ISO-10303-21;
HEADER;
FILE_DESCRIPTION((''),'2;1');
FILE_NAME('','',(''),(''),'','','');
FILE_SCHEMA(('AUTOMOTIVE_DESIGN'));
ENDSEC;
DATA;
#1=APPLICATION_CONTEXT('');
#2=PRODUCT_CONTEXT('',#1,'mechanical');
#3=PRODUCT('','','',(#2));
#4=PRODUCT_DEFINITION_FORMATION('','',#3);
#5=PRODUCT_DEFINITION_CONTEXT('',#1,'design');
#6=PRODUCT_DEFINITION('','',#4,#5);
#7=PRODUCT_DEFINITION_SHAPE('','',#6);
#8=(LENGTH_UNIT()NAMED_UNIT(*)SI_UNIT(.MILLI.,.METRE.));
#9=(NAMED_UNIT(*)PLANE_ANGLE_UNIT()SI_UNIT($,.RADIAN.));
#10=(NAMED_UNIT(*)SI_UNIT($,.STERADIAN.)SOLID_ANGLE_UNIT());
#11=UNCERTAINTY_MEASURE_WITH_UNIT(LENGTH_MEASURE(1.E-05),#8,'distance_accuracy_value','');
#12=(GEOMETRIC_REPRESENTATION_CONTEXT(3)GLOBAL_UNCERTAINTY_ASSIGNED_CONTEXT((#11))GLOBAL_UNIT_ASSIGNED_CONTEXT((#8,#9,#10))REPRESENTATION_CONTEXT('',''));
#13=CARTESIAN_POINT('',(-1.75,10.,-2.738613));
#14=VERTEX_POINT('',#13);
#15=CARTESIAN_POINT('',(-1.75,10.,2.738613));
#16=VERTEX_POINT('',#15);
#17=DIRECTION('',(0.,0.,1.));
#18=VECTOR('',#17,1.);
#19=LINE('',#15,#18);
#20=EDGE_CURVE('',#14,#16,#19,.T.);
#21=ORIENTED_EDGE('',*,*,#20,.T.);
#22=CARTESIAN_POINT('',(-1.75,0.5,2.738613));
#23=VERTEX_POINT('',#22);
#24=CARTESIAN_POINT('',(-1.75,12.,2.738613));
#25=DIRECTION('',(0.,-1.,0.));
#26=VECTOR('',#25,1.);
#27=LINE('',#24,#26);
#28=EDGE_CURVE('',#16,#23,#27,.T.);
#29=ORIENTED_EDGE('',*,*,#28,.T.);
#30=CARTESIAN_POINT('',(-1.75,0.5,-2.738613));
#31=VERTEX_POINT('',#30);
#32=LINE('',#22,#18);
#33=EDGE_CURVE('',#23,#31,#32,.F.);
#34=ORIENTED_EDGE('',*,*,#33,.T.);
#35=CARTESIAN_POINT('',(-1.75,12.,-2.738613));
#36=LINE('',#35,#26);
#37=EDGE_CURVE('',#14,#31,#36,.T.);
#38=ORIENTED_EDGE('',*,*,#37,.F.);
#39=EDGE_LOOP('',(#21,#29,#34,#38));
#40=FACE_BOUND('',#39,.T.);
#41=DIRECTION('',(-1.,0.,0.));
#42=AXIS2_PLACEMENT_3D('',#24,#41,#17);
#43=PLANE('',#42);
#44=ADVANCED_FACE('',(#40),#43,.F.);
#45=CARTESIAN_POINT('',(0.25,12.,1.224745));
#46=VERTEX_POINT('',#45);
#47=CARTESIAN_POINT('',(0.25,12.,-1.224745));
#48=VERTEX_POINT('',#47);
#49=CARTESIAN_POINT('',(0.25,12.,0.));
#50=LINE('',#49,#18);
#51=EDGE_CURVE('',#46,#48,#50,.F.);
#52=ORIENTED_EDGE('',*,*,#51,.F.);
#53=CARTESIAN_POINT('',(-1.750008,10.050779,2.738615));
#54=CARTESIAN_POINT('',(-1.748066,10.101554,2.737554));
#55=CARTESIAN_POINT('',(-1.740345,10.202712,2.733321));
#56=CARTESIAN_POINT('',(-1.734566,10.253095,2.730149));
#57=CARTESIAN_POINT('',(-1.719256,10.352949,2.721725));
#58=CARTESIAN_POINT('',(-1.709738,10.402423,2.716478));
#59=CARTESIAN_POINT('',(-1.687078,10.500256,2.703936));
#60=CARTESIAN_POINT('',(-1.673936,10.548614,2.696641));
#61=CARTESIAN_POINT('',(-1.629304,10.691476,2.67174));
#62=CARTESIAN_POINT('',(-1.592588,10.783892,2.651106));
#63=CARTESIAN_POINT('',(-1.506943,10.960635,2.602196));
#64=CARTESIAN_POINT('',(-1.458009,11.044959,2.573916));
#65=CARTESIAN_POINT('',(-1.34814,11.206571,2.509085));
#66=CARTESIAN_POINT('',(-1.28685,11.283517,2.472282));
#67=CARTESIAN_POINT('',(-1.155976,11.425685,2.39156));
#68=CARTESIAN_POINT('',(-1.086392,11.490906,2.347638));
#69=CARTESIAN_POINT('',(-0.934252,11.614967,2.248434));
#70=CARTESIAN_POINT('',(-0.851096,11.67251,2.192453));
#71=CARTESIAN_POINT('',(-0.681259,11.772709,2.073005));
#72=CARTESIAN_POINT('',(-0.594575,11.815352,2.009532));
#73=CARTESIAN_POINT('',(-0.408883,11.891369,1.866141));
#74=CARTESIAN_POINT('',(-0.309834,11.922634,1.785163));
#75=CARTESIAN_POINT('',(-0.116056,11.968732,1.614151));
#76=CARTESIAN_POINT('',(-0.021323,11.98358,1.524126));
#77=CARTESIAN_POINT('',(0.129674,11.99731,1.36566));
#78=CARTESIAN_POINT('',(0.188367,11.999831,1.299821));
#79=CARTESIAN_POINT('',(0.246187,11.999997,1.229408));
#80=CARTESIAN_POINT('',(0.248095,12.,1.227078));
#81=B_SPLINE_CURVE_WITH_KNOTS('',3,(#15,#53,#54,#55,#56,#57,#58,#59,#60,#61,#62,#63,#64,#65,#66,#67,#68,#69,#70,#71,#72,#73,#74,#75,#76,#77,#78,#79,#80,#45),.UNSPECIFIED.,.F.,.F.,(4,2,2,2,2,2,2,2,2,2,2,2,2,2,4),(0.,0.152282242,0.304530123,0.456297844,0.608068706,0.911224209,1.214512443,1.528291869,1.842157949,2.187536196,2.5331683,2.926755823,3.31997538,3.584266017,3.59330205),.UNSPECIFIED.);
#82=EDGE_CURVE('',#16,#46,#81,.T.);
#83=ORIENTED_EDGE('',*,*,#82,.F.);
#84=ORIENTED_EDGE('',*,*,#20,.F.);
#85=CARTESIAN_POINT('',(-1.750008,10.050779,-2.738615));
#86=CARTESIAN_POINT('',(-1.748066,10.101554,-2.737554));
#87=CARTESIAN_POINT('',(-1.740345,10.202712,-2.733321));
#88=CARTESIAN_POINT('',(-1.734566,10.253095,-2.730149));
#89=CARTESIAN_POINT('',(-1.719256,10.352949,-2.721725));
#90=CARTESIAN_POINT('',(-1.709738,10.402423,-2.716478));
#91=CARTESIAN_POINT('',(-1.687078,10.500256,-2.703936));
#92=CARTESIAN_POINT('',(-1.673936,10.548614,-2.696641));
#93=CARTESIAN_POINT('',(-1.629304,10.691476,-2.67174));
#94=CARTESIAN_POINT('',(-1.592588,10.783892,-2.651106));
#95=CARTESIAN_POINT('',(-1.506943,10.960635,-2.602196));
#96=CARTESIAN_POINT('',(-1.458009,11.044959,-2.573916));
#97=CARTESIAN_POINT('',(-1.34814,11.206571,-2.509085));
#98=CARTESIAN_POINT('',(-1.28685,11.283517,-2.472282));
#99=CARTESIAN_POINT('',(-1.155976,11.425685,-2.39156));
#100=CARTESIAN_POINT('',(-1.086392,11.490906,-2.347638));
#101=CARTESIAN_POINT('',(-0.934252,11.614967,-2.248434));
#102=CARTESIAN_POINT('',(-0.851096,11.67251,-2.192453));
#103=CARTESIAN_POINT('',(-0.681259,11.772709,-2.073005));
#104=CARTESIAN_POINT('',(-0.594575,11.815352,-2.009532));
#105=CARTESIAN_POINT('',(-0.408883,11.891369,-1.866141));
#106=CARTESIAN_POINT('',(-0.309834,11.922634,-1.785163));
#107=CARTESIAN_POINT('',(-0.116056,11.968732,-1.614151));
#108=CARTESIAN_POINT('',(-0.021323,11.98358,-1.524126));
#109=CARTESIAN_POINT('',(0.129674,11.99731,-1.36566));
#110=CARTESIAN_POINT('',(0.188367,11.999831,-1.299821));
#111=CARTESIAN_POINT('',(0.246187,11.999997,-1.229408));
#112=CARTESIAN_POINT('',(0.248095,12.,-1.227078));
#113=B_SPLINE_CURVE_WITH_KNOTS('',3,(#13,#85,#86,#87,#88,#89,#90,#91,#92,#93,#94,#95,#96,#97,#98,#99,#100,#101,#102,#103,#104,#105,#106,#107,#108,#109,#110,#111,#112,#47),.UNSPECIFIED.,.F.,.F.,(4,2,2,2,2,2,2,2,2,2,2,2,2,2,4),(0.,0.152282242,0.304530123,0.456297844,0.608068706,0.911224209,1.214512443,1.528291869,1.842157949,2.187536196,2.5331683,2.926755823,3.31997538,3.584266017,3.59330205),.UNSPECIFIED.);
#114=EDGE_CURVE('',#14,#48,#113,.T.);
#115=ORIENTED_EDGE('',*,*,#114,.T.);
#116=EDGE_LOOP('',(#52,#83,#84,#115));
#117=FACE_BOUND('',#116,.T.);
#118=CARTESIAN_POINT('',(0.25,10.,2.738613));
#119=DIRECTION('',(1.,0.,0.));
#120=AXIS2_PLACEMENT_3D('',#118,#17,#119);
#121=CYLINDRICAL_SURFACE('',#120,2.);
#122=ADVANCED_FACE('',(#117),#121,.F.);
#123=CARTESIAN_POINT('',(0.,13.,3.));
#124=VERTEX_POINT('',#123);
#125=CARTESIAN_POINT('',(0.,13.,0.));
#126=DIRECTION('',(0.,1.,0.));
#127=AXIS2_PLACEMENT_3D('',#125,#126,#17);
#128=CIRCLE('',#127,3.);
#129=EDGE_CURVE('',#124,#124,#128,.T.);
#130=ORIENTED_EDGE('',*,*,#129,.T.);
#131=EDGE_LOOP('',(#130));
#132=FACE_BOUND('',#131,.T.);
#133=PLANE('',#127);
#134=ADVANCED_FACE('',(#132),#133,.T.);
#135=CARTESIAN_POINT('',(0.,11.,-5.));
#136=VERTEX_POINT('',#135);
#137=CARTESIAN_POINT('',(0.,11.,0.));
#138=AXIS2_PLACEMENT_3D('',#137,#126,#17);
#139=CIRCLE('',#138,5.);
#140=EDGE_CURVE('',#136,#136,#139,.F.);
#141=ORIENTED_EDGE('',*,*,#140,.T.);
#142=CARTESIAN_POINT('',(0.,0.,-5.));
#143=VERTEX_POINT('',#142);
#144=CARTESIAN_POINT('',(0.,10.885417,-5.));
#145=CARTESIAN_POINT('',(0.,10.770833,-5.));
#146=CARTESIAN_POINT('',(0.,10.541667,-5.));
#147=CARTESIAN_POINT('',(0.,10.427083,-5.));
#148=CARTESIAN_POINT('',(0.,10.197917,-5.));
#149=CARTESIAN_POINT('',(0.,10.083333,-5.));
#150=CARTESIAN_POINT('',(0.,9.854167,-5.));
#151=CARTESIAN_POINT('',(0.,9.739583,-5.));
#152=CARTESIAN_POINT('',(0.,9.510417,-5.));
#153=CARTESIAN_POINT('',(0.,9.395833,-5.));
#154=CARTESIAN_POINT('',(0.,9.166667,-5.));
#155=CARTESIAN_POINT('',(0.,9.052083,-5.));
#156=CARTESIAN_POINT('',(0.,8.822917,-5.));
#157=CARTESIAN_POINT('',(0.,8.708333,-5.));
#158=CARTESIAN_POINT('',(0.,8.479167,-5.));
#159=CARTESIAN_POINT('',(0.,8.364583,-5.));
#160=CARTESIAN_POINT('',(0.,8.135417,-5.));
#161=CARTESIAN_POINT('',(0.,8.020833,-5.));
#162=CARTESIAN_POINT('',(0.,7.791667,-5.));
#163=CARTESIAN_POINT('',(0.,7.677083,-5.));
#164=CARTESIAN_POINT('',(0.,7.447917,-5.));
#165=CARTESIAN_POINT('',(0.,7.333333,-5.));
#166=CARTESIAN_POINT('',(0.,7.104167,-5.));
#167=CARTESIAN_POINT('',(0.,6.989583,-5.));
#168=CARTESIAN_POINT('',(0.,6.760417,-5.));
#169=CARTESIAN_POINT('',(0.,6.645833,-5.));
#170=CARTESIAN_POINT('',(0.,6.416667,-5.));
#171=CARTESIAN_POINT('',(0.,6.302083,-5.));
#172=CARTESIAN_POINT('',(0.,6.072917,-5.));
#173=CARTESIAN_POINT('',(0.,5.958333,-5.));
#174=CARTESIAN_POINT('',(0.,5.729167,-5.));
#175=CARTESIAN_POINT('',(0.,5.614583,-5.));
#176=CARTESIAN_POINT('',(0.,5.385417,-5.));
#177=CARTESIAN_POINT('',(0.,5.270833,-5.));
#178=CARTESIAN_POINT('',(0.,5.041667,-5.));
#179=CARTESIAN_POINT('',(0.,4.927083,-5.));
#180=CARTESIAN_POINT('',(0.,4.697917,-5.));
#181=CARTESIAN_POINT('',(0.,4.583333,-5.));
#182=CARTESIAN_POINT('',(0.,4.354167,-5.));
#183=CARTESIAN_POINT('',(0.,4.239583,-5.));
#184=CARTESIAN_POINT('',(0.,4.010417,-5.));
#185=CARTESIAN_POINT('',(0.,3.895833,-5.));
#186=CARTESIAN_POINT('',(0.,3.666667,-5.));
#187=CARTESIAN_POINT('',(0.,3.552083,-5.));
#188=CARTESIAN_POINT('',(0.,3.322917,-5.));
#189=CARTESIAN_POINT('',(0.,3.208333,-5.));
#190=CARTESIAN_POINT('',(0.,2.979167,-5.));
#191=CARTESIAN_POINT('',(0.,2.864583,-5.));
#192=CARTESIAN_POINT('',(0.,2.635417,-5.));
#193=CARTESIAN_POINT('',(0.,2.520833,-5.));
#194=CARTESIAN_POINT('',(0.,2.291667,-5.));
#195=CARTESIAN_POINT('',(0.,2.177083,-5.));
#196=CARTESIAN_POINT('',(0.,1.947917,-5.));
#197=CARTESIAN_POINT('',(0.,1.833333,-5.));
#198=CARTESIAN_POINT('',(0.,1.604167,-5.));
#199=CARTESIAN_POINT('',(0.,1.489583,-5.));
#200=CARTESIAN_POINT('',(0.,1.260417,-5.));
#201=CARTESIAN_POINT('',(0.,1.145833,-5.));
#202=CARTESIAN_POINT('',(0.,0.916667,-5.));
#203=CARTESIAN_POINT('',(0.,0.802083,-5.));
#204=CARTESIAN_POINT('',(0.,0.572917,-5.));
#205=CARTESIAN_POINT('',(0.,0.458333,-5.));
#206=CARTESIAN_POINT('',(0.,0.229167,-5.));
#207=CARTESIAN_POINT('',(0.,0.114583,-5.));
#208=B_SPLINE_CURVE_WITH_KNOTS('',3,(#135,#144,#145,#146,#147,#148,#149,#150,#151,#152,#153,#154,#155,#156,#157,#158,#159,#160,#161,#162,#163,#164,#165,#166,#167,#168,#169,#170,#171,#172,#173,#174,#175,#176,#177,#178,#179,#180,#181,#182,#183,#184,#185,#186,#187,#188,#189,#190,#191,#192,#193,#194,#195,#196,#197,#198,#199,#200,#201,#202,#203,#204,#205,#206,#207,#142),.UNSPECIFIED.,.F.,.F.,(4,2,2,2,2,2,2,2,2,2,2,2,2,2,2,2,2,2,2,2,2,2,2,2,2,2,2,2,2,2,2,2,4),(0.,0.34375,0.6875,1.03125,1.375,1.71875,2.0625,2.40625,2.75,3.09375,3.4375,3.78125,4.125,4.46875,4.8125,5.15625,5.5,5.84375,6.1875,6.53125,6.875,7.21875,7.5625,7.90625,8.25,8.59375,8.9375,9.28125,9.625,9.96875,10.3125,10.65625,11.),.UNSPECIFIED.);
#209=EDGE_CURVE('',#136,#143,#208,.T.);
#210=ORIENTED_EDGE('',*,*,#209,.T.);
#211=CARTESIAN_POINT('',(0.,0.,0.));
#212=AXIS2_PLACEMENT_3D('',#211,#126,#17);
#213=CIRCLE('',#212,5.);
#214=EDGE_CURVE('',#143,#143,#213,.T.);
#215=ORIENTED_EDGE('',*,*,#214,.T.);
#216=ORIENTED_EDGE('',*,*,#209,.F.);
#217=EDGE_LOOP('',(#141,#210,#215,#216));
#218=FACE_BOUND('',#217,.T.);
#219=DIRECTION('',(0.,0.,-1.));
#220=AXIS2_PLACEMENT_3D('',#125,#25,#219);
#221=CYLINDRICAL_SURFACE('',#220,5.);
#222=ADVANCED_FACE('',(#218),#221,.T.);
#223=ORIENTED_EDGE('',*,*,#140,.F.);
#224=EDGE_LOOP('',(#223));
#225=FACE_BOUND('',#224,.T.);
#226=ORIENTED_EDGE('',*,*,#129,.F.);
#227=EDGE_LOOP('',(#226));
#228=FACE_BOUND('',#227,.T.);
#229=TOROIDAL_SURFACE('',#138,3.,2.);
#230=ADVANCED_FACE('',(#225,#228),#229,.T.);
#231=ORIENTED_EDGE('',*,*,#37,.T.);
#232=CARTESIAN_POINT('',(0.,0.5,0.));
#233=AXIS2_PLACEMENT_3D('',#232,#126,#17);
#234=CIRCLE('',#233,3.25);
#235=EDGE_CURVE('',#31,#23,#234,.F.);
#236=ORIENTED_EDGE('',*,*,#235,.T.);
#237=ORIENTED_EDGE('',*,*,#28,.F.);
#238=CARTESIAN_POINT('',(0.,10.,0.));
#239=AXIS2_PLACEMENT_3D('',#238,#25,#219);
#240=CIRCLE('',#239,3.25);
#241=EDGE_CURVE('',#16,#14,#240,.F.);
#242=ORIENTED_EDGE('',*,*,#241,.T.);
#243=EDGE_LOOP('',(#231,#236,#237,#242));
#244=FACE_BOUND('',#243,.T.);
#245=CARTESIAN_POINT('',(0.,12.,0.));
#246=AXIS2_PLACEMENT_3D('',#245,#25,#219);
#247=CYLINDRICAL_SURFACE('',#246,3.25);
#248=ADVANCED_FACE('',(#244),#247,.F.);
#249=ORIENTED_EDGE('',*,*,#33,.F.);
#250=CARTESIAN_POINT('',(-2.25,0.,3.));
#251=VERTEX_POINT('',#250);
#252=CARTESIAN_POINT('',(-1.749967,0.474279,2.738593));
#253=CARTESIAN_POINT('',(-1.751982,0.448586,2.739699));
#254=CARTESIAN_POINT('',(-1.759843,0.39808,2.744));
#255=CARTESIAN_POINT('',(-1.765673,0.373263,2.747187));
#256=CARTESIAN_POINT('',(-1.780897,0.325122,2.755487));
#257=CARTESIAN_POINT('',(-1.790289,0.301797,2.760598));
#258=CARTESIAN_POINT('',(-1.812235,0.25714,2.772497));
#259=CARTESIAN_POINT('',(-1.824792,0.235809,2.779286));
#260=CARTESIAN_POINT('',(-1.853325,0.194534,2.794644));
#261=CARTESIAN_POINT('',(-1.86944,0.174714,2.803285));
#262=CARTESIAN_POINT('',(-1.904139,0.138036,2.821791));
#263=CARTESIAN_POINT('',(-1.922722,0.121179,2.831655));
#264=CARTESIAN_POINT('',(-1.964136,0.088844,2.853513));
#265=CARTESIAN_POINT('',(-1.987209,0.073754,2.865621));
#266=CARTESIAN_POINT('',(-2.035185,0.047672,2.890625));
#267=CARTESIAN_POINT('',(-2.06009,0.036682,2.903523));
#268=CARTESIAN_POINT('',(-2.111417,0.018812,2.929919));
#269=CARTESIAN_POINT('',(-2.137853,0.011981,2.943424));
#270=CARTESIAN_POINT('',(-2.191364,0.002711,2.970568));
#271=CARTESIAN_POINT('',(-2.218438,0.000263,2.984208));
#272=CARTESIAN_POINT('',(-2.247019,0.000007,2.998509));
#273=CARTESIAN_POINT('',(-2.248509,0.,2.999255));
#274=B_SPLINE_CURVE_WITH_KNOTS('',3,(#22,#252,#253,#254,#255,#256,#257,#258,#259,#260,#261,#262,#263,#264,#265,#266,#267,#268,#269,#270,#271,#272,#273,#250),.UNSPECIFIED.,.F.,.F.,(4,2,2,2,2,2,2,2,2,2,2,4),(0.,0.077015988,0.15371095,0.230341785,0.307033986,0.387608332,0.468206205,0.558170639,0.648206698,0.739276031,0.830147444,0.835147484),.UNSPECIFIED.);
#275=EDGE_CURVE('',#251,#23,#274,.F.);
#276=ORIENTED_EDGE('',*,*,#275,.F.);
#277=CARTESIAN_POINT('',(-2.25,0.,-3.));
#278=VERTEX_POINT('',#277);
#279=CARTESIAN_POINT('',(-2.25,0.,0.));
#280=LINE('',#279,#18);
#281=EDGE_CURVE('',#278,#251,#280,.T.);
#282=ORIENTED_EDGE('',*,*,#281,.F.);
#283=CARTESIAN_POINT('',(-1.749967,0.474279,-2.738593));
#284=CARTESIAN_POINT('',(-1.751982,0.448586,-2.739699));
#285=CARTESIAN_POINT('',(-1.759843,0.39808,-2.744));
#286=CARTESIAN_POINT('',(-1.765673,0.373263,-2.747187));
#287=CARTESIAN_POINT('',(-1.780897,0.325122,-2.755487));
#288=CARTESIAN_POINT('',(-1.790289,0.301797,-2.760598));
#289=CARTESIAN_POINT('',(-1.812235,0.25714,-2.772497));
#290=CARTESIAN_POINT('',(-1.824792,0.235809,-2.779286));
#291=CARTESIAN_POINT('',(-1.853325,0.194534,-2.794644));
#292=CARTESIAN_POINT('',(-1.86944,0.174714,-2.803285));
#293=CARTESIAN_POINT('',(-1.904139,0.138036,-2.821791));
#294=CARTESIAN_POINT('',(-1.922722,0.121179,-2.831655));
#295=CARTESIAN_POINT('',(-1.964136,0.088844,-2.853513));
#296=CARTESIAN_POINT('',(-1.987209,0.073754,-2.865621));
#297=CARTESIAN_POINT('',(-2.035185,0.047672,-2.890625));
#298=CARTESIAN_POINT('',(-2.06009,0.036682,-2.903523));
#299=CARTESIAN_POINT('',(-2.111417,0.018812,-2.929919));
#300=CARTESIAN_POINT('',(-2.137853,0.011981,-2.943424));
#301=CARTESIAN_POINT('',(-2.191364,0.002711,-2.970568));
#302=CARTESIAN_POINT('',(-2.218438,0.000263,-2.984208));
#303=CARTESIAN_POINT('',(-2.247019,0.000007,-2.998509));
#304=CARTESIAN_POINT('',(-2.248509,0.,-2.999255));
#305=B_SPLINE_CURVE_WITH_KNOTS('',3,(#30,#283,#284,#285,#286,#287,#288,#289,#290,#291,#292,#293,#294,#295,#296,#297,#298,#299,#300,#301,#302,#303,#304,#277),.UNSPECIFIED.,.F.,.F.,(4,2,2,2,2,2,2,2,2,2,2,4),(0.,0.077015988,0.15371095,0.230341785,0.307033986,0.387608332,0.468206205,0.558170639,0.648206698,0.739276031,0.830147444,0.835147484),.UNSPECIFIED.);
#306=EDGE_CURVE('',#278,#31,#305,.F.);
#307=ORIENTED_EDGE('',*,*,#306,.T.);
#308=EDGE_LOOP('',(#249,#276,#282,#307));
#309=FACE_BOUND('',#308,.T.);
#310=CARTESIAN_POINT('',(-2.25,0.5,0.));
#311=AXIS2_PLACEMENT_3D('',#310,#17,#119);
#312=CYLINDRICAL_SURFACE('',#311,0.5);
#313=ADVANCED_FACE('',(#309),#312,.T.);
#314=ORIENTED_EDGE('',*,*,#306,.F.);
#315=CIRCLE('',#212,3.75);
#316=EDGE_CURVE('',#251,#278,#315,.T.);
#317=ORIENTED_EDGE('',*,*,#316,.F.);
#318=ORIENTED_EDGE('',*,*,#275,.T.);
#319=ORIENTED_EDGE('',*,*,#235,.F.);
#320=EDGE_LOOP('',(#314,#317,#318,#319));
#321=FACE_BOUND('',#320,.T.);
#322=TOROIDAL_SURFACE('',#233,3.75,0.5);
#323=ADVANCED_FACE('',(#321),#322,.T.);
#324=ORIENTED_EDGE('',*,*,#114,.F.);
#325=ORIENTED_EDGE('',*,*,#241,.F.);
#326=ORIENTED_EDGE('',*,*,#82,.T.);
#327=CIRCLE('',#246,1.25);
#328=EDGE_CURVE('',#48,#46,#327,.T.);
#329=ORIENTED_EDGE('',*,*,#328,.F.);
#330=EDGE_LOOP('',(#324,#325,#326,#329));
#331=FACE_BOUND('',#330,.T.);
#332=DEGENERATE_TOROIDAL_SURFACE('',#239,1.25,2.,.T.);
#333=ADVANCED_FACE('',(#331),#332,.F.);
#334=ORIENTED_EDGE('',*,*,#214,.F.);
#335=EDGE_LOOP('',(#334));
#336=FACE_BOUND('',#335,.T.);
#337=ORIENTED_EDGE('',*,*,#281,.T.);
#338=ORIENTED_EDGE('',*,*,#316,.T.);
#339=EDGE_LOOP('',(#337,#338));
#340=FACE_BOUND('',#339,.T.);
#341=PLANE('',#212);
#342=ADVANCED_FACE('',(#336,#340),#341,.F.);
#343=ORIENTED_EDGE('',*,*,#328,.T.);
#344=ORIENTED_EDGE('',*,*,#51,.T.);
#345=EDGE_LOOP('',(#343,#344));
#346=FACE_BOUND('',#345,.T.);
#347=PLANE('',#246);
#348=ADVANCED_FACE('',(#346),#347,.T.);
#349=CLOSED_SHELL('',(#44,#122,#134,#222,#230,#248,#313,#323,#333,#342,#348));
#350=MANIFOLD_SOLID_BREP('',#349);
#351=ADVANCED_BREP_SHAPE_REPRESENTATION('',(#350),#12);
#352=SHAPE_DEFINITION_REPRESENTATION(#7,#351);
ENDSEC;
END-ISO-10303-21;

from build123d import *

# Parameters (mm, degrees)
SKETCH1_R           = 5
BOSS_EXTRUDE1_DEPTH = 13
CUT_EXTRUDE1_DEPTH  = 12
FILLET4_R           = 2
FILLET5_R           = 0.5
FILLET6_R           = 2


with BuildPart() as part:
    # Sketch1 → Boss-Extrude1 (new body)
    with BuildSketch(Plane(origin=(0, 0, 0), x_dir=(1, 0, 0), z_dir=(0, 1, 0))):
        with Locations(Location((0, 0, 0), (0, 0, 90))):
            Circle(SKETCH1_R)
    extrude(amount=BOSS_EXTRUDE1_DEPTH)

    # Insert → Cut-Extrude1 (cut)
    with BuildSketch(Plane.XZ):
        with BuildLine():
            Line((-1.75, 2.738612788), (-1.75, -2.738612788))
            ThreePointArc((-1.75, -2.738612788), (3.25, 0), (-1.75, 2.738612788))
        make_face()
    extrude(amount=-CUT_EXTRUDE1_DEPTH, mode=Mode.SUBTRACT)

    # Fillet4
    # the kernel refuses this fillet: 2 mm, written as the material it adds along each edge
    with BuildSketch(Plane(origin=(0, 12, 0), x_dir=(-0.9999950652018582, 0, -0.0031415874858799196), z_dir=(-0.0031415874858799196, 0, 0.9999950652018582))) as fillet4_piece_1:
        with BuildLine():
            CenterArc((3.25 - FILLET4_R, FILLET4_R), FILLET4_R, 270, 90)
            Line((3.25 - FILLET4_R, 0), (3.25, 0))
            Line((3.25, 0), (3.25, FILLET4_R))
        make_face()
    revolve(axis=Axis((0, 12, 0), (0, -1, 0)), revolution_arc=359.64)
    with BuildSketch(Plane(origin=(-1.75, 12, 7.738612788), x_dir=(0, -1, 0), z_dir=(0, 0, -1))) as fillet4_piece_2_section:
        with BuildLine():
            CenterArc((FILLET4_R, -FILLET4_R), FILLET4_R, 90, 90)
            Line((0, -FILLET4_R), (0, 0))
            Line((0, 0), (FILLET4_R, 0))
        make_face()
    fillet4_piece_2 = extrude(amount=15.477225575, mode=Mode.PRIVATE)
    fillet4_piece_2 = fillet4_piece_2 & Plane(origin=(0, 11.564510451, 0), x_dir=(-0.5384615384615385, 0, -0.8426500884694863), z_dir=(0, -1, 0)) * Cylinder(3.25, 39, mode=Mode.PRIVATE)
    add(fillet4_piece_2)

    # Fillet5
    fillet5_edges = [part.edges().sort_by_distance(p)[0] for p in [
        (3.25, 0, 0),
        (-1.75, 0, 0),
    ]]
    fillet(fillet5_edges, radius=FILLET5_R)

    # Fillet6
    fillet6_edges = [part.edges().sort_by_distance(p)[0] for p in [
        (0, 13, 5),
    ]]
    fillet(fillet6_edges, radius=FILLET6_R)


solid = part.part
